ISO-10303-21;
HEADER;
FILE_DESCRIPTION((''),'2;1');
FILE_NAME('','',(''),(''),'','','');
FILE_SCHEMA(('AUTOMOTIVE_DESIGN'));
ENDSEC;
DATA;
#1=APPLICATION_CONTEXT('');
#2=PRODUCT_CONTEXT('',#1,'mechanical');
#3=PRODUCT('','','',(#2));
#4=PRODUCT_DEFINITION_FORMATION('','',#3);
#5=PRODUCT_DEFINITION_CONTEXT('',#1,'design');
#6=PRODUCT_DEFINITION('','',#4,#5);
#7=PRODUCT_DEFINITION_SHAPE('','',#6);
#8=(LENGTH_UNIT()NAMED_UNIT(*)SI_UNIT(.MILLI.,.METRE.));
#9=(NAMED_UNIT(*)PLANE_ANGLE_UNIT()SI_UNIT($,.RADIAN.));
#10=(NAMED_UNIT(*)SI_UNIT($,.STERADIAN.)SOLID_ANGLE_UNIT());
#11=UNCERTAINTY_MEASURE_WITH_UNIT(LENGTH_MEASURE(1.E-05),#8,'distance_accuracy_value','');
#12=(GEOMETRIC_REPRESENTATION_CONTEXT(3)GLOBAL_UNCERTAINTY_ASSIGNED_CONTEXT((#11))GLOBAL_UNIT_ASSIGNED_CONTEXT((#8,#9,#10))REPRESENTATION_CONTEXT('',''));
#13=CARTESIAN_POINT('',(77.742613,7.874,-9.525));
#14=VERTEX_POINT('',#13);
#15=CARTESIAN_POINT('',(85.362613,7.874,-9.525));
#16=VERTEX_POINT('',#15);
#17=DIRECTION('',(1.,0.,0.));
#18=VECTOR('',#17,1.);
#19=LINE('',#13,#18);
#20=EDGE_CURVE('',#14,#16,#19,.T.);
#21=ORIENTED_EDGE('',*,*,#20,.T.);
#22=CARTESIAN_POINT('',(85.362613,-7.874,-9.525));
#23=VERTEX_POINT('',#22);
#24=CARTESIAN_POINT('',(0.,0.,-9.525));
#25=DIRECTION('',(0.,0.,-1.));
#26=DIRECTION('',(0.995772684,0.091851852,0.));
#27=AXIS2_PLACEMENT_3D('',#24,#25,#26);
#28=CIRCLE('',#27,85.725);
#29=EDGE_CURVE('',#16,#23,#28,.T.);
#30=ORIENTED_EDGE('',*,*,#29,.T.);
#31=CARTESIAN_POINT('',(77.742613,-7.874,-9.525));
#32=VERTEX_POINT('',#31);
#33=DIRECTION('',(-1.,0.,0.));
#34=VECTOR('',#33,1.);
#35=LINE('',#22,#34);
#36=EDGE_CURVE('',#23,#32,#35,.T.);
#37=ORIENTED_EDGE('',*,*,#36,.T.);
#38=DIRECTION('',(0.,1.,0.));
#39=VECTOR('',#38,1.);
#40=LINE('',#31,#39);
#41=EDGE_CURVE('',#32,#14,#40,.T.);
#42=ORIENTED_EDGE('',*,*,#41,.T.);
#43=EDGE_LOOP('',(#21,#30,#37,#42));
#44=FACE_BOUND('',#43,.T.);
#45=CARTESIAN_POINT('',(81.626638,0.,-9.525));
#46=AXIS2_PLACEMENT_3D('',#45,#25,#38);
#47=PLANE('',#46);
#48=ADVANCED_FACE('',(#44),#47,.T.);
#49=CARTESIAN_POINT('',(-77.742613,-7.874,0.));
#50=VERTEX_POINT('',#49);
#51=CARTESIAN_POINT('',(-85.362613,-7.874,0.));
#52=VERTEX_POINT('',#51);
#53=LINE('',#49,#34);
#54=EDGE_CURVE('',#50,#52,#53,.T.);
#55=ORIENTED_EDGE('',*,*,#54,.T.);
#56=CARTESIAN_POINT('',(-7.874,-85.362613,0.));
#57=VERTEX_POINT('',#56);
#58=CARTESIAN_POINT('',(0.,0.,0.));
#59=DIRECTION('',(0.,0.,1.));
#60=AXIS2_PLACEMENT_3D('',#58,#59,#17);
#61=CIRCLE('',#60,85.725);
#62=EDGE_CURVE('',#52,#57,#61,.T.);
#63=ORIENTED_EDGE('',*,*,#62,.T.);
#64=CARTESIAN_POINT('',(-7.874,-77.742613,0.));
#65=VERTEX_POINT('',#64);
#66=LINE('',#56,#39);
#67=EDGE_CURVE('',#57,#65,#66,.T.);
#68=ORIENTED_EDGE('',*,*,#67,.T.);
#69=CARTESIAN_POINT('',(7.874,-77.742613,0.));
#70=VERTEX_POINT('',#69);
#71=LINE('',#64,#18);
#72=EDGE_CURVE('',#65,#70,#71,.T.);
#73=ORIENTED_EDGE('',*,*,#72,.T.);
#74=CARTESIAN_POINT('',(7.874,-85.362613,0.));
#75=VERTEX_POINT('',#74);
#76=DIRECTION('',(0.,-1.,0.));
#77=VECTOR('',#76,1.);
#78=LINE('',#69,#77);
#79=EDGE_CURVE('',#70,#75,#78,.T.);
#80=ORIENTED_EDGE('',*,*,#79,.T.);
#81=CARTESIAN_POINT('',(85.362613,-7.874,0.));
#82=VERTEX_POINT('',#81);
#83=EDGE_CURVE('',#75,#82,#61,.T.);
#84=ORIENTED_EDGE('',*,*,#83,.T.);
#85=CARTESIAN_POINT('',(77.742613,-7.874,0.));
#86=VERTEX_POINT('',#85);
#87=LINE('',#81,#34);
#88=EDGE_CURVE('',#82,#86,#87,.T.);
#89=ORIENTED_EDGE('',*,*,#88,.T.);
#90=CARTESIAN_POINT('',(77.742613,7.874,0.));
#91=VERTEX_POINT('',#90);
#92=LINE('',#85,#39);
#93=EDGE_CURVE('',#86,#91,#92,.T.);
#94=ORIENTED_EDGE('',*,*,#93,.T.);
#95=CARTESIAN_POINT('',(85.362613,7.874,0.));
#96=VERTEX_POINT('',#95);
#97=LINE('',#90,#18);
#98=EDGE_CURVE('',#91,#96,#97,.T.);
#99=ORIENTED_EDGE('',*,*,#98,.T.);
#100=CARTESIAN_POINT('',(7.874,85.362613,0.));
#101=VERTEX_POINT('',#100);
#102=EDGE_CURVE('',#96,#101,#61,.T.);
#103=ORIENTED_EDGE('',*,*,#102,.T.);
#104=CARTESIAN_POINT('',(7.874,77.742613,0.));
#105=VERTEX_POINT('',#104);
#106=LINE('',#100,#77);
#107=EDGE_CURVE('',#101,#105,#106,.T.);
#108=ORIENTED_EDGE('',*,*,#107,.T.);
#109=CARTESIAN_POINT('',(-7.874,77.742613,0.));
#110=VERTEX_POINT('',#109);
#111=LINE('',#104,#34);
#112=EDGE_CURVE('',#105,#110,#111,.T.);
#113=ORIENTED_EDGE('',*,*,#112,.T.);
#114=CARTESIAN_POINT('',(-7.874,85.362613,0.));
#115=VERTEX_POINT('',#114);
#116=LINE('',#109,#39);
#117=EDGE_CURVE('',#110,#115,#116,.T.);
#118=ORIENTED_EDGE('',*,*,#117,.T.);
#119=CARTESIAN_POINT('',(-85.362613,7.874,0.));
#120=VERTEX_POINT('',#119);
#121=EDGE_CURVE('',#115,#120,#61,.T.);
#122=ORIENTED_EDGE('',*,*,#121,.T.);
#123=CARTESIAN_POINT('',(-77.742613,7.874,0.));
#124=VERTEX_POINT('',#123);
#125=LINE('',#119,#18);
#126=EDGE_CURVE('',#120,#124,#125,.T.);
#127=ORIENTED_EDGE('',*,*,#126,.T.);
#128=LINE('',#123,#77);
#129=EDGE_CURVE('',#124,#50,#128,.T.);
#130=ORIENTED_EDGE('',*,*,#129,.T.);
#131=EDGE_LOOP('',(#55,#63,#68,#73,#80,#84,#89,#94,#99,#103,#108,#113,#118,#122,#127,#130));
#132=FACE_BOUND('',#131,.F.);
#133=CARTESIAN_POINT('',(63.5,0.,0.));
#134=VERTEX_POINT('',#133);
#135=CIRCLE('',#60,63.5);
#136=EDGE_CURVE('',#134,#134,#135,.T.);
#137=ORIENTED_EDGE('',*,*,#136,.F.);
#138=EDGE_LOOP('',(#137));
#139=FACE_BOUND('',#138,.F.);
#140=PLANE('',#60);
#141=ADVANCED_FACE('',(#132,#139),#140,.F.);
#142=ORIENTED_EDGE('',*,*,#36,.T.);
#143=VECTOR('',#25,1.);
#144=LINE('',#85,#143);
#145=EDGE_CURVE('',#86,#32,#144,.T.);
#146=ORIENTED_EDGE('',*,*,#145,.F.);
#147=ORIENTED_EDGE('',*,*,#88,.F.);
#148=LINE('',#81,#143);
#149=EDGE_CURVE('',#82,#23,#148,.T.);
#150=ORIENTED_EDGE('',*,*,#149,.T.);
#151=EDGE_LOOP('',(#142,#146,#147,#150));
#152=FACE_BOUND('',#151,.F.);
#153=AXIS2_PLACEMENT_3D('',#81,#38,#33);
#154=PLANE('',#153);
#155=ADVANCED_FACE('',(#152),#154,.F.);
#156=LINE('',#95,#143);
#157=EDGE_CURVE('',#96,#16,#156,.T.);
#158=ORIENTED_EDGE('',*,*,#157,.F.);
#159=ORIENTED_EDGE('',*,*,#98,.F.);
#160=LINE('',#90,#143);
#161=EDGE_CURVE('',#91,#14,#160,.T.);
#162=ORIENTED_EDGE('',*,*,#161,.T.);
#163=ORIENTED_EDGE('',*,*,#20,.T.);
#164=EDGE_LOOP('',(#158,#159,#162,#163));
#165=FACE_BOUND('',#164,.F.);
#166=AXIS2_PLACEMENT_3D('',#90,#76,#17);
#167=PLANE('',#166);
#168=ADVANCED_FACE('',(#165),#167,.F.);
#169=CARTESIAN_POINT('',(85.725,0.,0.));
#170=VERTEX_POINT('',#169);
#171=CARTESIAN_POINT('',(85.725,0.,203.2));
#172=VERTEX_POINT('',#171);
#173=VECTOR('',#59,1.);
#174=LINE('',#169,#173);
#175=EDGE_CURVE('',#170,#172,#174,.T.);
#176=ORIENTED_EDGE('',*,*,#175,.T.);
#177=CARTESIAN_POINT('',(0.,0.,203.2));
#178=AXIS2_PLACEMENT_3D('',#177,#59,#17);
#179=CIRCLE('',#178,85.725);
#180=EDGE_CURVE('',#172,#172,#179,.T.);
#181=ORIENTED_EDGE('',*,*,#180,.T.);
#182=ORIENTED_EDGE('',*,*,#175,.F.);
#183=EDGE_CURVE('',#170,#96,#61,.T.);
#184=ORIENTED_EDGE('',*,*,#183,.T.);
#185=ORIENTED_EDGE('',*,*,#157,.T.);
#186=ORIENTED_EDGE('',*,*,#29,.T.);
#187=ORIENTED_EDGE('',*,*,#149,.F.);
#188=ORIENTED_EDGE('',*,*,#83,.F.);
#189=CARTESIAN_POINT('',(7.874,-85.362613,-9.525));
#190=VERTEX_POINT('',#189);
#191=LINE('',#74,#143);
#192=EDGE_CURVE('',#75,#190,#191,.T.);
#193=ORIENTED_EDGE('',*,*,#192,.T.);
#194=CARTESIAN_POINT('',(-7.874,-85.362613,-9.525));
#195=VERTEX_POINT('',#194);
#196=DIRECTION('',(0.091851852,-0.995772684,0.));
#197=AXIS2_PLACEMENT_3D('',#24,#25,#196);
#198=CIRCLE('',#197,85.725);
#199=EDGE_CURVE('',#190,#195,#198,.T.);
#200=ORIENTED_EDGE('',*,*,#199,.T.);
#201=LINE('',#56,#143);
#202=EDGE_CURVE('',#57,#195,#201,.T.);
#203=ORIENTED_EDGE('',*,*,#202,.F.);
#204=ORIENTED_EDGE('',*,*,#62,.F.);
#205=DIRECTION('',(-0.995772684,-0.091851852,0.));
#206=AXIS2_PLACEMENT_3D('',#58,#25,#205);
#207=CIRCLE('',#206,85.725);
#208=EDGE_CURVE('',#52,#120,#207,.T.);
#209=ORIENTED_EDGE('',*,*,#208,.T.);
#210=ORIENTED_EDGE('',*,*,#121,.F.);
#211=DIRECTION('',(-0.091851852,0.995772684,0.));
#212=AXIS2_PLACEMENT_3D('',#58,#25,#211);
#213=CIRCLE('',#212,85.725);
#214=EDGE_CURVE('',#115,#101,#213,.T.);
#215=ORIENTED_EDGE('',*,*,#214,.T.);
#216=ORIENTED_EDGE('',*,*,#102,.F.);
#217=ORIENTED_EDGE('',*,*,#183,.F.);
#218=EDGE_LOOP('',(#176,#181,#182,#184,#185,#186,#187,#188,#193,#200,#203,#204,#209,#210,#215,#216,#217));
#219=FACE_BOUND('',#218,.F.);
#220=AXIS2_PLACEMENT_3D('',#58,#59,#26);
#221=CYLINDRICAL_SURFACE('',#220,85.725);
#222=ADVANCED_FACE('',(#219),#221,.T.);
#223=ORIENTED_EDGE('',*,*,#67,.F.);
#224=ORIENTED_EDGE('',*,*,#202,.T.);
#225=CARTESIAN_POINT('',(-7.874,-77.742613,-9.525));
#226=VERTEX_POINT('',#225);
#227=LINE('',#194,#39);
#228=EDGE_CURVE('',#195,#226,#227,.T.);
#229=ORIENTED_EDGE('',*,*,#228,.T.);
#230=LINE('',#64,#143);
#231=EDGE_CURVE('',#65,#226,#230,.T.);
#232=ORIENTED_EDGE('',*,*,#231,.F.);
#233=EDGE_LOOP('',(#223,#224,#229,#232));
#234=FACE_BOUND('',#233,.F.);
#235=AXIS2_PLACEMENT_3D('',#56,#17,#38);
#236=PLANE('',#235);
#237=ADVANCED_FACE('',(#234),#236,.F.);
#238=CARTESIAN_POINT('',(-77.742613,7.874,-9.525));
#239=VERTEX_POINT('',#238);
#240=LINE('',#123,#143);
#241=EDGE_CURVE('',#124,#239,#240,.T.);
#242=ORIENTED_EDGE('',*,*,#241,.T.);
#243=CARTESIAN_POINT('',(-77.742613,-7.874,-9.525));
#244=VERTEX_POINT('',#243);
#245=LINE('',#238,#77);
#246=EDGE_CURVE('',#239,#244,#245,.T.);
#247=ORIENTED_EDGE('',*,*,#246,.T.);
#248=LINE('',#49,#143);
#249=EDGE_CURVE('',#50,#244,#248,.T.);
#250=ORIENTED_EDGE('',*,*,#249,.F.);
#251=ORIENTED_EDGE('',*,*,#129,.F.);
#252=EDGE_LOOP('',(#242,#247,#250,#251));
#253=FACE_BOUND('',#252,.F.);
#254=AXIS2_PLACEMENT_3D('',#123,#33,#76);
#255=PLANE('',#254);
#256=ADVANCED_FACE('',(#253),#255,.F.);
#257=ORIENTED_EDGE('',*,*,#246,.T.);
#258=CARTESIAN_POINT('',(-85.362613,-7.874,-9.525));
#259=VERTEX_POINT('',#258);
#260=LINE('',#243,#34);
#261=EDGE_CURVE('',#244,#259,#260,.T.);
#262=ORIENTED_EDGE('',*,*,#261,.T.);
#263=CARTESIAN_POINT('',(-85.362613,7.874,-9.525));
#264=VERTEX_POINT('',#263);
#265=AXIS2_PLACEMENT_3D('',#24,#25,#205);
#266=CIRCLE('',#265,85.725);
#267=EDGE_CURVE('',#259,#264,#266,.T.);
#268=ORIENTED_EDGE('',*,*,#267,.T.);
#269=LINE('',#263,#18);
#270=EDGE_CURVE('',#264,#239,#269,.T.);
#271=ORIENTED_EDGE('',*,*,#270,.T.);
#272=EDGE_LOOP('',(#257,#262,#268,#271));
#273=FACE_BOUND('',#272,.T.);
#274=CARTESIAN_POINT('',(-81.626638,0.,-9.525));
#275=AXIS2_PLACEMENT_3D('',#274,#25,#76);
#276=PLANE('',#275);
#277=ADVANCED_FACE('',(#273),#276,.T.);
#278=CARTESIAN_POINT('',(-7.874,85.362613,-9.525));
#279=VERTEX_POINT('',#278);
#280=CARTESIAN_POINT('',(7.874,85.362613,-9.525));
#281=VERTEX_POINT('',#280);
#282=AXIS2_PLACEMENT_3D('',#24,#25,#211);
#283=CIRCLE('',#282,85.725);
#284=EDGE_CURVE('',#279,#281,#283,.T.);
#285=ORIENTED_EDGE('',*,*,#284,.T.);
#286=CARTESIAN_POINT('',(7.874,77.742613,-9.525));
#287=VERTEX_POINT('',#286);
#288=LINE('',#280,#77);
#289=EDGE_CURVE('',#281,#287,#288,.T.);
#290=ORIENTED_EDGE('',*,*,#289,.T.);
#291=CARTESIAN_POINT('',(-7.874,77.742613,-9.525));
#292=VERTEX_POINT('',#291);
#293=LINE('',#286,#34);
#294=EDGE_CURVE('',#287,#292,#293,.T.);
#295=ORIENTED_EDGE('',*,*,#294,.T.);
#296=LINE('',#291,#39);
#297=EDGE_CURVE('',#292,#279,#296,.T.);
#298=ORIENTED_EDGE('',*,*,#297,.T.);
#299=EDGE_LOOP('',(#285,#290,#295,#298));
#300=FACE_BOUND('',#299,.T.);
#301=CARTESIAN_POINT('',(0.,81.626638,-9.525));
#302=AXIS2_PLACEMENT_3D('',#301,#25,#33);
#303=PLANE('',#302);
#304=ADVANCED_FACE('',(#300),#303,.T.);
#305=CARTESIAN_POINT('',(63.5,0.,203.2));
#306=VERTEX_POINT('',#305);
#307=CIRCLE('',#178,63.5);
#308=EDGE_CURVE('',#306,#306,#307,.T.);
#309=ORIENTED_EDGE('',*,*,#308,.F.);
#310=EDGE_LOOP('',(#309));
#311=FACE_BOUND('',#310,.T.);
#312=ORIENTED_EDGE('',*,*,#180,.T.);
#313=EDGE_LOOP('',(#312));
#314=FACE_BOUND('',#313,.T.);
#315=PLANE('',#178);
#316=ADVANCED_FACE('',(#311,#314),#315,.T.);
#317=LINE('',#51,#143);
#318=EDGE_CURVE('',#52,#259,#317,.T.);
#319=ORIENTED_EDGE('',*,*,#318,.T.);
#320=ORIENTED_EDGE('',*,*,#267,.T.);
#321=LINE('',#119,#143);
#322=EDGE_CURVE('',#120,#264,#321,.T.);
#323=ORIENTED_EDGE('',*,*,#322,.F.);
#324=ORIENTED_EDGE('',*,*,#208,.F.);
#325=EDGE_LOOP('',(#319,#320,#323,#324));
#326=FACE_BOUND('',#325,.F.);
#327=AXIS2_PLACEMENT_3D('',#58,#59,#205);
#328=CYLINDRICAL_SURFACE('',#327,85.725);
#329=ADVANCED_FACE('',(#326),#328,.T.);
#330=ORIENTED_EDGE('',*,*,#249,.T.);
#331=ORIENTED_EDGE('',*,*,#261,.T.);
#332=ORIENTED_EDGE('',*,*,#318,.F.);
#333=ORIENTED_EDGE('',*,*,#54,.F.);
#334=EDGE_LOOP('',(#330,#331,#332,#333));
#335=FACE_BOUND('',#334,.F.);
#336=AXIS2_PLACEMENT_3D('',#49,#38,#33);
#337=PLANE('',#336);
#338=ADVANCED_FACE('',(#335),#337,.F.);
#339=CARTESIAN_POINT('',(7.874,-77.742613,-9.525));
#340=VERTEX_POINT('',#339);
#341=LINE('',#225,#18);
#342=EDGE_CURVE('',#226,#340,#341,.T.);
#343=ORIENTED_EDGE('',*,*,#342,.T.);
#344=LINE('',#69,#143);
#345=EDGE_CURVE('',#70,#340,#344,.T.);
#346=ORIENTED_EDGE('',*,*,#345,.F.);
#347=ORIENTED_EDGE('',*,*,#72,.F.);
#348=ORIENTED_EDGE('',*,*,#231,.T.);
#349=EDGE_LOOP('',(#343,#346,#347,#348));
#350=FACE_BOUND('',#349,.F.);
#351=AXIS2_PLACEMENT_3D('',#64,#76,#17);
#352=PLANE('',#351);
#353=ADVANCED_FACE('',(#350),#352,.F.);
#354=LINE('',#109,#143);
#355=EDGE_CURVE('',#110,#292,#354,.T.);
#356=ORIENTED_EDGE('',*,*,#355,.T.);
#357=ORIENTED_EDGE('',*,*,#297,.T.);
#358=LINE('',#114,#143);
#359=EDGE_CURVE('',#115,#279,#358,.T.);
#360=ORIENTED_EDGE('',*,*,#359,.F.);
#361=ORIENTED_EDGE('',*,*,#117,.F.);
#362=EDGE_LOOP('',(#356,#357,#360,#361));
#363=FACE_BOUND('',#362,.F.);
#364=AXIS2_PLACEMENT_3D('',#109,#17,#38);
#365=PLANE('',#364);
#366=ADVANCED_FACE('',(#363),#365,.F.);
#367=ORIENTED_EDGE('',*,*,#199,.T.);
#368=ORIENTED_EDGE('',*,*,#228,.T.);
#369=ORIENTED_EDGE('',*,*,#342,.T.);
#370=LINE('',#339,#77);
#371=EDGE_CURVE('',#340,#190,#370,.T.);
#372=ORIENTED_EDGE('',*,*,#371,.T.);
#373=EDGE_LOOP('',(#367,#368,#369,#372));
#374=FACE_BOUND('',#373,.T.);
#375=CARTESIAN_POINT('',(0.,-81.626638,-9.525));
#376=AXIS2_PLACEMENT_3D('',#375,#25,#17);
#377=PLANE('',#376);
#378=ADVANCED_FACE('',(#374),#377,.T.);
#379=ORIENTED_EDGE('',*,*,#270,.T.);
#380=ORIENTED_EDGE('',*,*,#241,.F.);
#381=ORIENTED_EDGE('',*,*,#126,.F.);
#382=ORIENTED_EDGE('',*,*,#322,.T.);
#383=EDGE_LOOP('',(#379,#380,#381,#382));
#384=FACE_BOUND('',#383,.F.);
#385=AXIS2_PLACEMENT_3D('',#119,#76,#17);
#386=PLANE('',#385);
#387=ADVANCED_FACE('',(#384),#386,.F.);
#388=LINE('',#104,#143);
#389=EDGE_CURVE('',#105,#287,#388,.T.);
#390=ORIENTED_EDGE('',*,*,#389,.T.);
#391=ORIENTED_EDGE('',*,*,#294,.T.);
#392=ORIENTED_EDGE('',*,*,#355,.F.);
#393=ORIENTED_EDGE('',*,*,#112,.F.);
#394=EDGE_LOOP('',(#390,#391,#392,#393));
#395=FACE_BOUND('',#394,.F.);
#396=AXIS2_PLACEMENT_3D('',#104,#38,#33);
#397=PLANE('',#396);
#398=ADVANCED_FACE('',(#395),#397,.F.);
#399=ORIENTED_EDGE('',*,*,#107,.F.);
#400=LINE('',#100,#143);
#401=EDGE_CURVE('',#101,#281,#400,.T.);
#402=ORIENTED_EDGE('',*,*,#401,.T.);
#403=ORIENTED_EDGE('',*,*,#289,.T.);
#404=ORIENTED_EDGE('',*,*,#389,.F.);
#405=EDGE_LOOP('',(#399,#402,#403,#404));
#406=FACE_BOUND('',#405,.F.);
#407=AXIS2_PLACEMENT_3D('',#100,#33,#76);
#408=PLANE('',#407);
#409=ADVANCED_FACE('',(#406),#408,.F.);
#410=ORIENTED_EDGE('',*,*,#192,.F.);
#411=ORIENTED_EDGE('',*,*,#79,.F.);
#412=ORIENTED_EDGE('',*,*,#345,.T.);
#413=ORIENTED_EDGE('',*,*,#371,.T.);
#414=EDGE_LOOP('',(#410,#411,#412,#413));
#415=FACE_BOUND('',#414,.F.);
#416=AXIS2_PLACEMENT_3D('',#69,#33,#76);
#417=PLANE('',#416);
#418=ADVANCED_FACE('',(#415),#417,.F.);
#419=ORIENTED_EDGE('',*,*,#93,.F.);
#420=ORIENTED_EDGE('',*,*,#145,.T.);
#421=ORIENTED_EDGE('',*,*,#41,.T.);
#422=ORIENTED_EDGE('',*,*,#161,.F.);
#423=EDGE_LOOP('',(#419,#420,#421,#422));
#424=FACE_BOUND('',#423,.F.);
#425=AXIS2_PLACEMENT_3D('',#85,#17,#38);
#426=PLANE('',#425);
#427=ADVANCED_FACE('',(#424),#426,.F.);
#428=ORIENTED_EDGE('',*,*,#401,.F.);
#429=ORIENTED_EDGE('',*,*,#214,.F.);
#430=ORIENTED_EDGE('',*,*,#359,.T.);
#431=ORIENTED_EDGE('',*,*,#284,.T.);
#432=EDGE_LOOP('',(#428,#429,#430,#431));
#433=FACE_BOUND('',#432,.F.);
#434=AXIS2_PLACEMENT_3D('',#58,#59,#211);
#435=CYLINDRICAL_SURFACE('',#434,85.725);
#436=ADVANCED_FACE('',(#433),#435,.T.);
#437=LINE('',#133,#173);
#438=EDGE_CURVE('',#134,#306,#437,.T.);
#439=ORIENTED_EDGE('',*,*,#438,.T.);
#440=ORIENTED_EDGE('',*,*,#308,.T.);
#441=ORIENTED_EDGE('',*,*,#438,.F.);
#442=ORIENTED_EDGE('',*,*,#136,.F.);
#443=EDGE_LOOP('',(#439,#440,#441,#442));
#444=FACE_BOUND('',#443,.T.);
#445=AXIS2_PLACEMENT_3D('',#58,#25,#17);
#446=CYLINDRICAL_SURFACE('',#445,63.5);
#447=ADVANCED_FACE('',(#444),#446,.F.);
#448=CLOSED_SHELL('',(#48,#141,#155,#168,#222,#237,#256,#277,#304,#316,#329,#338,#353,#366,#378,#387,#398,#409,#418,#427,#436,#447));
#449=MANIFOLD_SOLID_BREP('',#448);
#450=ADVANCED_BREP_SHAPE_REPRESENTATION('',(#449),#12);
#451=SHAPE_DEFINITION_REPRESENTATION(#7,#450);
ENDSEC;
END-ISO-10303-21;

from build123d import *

# Parameters (mm, degrees)
F0_R            = 85.725
F0_R_2          = 63.5
F1_DEPTH        = 203.2
F3_DEPTH        = 9.525
F3_COPIES_COUNT = 4


# Not quite as in the source:
# - after a boolean that leaves OpenCascade's solid faulty, fix() repairs it
# - a pattern or mirror of a feature is missing from the dataset's text; its kind, count and spacing are read off the source's solid


with BuildPart() as f1:
    # F0 (on Top) → F1 (new body)
    with BuildSketch(Plane.XY):
        Circle(F0_R)
        Circle(F0_R_2, mode=Mode.SUBTRACT)
    extrude(amount=F1_DEPTH)

    # F2 (on face) → F3 (join)
    with BuildSketch(Plane(origin=(0, 0, 0), x_dir=(1, 0, 0), z_dir=(0, 0, -1))):
        with BuildLine():
            Line((-7.874, 85.3626132976), (-7.874, 77.7426132976))
            Line((-7.874, 77.7426132976), (7.874, 77.7426132976))
            Line((7.874, 77.7426132976), (7.874, 85.3626132976))
            ThreePointArc((7.874, 85.3626132976), (0, 85.725), (-7.874, 85.3626132976))
        make_face()
    f3 = extrude(amount=F3_DEPTH)

    # F3_copies: F3 ×4 about axis
    f3_copies_axis = Axis((0, 0, 0), (0, 0, 1))
    for i in range(1, F3_COPIES_COUNT):
        add(f3.rotate(f3_copies_axis, i * 360 / F3_COPIES_COUNT))

    add(f1.part.fix(), mode=Mode.REPLACE)


solid = f1.part
